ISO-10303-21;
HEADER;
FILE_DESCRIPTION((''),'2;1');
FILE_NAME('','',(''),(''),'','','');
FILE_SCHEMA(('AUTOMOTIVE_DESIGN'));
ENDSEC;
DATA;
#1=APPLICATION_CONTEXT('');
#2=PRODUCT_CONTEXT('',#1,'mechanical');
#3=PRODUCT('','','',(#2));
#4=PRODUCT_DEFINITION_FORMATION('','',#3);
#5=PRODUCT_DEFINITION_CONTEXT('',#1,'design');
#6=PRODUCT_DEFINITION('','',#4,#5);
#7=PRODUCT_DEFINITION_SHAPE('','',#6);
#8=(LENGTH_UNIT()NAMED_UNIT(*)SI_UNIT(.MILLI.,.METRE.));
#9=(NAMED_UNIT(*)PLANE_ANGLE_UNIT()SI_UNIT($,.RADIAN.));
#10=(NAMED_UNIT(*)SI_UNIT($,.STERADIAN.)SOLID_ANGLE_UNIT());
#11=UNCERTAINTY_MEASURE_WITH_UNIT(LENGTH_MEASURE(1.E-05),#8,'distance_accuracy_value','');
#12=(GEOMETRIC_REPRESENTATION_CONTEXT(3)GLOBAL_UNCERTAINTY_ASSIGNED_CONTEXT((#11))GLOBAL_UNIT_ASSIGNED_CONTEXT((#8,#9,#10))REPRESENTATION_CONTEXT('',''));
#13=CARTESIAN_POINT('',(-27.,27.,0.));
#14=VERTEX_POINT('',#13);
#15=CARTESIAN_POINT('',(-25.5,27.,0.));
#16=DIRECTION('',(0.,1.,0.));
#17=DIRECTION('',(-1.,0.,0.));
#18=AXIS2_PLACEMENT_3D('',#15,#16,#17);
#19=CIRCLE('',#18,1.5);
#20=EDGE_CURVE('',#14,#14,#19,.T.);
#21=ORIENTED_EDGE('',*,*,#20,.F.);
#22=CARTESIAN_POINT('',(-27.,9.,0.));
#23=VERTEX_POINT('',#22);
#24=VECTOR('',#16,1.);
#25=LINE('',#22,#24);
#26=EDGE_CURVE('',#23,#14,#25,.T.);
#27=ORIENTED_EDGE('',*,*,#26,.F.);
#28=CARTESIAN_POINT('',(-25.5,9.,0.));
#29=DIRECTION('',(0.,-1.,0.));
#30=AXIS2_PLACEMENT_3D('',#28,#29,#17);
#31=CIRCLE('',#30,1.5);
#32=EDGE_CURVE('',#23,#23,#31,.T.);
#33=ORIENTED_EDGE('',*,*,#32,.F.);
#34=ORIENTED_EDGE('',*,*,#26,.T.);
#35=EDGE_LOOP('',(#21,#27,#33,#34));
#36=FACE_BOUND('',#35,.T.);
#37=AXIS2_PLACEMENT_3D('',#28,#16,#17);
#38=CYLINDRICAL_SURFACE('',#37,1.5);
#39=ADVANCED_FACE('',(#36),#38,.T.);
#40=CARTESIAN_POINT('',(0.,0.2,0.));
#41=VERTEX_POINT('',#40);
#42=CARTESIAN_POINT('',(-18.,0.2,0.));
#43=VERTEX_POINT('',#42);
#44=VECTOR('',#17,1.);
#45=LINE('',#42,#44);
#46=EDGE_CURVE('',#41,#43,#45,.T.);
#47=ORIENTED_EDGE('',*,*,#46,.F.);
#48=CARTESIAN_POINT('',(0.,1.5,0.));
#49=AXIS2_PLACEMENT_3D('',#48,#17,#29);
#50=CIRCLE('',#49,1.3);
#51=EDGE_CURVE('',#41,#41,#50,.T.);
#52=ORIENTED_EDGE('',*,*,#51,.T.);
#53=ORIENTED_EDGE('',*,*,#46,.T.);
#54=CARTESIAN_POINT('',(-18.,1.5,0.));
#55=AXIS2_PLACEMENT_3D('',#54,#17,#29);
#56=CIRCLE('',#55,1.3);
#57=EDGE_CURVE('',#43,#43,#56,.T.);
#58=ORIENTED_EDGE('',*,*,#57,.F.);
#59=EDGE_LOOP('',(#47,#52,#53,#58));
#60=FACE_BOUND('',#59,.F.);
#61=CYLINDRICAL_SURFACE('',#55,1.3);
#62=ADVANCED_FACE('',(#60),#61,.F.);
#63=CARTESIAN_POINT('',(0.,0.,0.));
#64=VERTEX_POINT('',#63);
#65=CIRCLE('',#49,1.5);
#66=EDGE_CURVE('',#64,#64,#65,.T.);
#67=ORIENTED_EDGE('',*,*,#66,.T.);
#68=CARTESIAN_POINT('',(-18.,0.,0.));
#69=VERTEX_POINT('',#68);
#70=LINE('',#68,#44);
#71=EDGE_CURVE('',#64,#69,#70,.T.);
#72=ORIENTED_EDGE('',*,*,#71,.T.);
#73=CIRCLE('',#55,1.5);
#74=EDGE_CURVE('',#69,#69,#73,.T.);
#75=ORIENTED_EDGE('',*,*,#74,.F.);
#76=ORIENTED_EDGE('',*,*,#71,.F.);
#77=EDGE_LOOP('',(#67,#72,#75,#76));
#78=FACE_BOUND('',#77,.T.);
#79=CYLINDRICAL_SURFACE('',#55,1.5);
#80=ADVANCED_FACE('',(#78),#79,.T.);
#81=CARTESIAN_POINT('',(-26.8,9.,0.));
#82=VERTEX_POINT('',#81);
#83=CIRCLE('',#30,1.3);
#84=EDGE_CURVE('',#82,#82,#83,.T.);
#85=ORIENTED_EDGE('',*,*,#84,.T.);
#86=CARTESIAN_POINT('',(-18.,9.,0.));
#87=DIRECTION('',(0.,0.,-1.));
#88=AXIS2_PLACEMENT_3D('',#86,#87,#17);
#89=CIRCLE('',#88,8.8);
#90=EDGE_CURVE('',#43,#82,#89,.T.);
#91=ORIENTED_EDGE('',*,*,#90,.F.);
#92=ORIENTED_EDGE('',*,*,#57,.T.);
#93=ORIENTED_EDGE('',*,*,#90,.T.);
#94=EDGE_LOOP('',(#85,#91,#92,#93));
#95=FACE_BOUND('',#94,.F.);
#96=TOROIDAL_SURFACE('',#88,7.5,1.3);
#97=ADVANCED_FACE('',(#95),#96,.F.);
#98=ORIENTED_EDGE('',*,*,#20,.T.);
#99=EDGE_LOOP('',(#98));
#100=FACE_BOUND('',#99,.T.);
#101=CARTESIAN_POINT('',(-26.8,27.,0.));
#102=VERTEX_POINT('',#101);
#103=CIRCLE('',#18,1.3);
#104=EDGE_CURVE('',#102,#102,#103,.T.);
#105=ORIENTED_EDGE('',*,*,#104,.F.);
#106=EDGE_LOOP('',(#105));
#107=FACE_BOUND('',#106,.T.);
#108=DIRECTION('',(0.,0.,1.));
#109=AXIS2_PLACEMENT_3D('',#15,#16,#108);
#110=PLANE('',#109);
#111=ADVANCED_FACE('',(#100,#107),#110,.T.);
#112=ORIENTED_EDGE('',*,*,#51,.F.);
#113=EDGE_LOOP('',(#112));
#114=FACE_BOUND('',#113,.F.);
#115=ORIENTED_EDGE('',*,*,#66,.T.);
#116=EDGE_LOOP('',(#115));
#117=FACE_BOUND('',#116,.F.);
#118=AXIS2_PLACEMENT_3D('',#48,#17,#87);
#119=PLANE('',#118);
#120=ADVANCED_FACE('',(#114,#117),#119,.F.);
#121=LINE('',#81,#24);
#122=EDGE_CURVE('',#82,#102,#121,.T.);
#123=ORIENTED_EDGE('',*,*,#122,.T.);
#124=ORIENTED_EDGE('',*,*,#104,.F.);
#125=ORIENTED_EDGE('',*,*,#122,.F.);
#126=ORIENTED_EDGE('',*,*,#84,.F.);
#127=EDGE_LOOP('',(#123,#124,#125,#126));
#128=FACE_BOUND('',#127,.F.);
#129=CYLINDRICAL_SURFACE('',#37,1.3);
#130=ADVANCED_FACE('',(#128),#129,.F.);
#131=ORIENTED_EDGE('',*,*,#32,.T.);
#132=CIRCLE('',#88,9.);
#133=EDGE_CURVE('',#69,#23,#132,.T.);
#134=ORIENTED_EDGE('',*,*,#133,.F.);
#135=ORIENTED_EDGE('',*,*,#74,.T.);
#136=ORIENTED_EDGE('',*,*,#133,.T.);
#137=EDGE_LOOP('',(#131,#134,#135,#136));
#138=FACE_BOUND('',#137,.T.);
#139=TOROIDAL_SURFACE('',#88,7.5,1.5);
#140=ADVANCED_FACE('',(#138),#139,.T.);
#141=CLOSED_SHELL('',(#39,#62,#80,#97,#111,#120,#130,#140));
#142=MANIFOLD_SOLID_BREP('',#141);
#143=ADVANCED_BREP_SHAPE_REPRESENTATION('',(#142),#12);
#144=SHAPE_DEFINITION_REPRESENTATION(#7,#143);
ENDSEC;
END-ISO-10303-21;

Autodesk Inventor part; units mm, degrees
ref_plane "YZ Plane" through (0, 0, 0) normal (1, 0, 0) x (0, 1, 0)
ref_plane "XY Plane" through (0, 0, 0) normal (0, 0, 1) x (1, 0, 0)
sketch "Sketch1" plane through (0, 0, 0) normal (0, 0, 1) x (1, 0, 0)
  line L0 (0, 0) -> (-27, 0)
  line L1 (-27, 0) -> (-27, 27)
  arc A0 (-24, 9) -> (-18, 3) centre (-18, 9) ccw
  arc A1 (-27, 9) -> (-18, 0) centre (-18, 9) ccw
  line L2 (0, 3) -> (-18, 3)
  line L3 (-24, 9) -> (-24, 27)
  line L4 (0, 0) -> (0, 3)
  line L5 (-27, 27) -> (-24, 27)
  line L6 (-25.5, 9) -> (-25.5, 27)
  line L7 (-18, 1.5) -> (0, 1.5)
  arc A2 (-25.5, 9) -> (-18, 1.5) centre (-18, 9) ccw
  line L8 (-24, 9) -> (-27, 9)
  line L9 (-18, 3) -> (-18, 0)
  dimension "d0" = 27
  dimension "d1" = 27
  dimension "d2" = 6
  dimension "d3" = 9
sketch "Sketch2" plane through (0, 0, 0) normal (1, 0, 0) x (0, 1, 0)
  circle A0 centre (1.5, 0) radius 1.5
  line L0 (0, 5.6966) -> (0, -5.6966) construction
  line L1 (3, 0) -> (-1.1636, 0) construction
  point P0 (0, 0)
  point P1 (0, 0)
  dimension "d5" = 3
  dimension "d6" = 1.5
ref_plane "Work Plane1" through (0, 27, 0) normal (0, 1, 0) x (-1, 0, 0)
sketch "Sketch3" plane through (0, 27, 0) normal (0, 1, 0) x (-1, 0, 0)
  circle A0 centre (25.5, 0) radius 1.5
  line L0 (27, 6.8213) -> (27, -6.8213) construction
  line L1 (30.5412, 0) -> (-1.145, 0) construction
  point P0 (0, 0)
  point P1 (27, 0)
  dimension "d8" = 3
  dimension "d9" = 27
  dimension "d10" = 25.5
sweep "Sweep1" add profiles "Sketch3" path "Sketch1" path curves L6 A2 L7
shell "Shell1" thickness 0.2 removed faces 2 at (0, 1.8952, 0.8627) at (-25.3633, 27, 0.3027)
properties part number "Hudson 1-70"
